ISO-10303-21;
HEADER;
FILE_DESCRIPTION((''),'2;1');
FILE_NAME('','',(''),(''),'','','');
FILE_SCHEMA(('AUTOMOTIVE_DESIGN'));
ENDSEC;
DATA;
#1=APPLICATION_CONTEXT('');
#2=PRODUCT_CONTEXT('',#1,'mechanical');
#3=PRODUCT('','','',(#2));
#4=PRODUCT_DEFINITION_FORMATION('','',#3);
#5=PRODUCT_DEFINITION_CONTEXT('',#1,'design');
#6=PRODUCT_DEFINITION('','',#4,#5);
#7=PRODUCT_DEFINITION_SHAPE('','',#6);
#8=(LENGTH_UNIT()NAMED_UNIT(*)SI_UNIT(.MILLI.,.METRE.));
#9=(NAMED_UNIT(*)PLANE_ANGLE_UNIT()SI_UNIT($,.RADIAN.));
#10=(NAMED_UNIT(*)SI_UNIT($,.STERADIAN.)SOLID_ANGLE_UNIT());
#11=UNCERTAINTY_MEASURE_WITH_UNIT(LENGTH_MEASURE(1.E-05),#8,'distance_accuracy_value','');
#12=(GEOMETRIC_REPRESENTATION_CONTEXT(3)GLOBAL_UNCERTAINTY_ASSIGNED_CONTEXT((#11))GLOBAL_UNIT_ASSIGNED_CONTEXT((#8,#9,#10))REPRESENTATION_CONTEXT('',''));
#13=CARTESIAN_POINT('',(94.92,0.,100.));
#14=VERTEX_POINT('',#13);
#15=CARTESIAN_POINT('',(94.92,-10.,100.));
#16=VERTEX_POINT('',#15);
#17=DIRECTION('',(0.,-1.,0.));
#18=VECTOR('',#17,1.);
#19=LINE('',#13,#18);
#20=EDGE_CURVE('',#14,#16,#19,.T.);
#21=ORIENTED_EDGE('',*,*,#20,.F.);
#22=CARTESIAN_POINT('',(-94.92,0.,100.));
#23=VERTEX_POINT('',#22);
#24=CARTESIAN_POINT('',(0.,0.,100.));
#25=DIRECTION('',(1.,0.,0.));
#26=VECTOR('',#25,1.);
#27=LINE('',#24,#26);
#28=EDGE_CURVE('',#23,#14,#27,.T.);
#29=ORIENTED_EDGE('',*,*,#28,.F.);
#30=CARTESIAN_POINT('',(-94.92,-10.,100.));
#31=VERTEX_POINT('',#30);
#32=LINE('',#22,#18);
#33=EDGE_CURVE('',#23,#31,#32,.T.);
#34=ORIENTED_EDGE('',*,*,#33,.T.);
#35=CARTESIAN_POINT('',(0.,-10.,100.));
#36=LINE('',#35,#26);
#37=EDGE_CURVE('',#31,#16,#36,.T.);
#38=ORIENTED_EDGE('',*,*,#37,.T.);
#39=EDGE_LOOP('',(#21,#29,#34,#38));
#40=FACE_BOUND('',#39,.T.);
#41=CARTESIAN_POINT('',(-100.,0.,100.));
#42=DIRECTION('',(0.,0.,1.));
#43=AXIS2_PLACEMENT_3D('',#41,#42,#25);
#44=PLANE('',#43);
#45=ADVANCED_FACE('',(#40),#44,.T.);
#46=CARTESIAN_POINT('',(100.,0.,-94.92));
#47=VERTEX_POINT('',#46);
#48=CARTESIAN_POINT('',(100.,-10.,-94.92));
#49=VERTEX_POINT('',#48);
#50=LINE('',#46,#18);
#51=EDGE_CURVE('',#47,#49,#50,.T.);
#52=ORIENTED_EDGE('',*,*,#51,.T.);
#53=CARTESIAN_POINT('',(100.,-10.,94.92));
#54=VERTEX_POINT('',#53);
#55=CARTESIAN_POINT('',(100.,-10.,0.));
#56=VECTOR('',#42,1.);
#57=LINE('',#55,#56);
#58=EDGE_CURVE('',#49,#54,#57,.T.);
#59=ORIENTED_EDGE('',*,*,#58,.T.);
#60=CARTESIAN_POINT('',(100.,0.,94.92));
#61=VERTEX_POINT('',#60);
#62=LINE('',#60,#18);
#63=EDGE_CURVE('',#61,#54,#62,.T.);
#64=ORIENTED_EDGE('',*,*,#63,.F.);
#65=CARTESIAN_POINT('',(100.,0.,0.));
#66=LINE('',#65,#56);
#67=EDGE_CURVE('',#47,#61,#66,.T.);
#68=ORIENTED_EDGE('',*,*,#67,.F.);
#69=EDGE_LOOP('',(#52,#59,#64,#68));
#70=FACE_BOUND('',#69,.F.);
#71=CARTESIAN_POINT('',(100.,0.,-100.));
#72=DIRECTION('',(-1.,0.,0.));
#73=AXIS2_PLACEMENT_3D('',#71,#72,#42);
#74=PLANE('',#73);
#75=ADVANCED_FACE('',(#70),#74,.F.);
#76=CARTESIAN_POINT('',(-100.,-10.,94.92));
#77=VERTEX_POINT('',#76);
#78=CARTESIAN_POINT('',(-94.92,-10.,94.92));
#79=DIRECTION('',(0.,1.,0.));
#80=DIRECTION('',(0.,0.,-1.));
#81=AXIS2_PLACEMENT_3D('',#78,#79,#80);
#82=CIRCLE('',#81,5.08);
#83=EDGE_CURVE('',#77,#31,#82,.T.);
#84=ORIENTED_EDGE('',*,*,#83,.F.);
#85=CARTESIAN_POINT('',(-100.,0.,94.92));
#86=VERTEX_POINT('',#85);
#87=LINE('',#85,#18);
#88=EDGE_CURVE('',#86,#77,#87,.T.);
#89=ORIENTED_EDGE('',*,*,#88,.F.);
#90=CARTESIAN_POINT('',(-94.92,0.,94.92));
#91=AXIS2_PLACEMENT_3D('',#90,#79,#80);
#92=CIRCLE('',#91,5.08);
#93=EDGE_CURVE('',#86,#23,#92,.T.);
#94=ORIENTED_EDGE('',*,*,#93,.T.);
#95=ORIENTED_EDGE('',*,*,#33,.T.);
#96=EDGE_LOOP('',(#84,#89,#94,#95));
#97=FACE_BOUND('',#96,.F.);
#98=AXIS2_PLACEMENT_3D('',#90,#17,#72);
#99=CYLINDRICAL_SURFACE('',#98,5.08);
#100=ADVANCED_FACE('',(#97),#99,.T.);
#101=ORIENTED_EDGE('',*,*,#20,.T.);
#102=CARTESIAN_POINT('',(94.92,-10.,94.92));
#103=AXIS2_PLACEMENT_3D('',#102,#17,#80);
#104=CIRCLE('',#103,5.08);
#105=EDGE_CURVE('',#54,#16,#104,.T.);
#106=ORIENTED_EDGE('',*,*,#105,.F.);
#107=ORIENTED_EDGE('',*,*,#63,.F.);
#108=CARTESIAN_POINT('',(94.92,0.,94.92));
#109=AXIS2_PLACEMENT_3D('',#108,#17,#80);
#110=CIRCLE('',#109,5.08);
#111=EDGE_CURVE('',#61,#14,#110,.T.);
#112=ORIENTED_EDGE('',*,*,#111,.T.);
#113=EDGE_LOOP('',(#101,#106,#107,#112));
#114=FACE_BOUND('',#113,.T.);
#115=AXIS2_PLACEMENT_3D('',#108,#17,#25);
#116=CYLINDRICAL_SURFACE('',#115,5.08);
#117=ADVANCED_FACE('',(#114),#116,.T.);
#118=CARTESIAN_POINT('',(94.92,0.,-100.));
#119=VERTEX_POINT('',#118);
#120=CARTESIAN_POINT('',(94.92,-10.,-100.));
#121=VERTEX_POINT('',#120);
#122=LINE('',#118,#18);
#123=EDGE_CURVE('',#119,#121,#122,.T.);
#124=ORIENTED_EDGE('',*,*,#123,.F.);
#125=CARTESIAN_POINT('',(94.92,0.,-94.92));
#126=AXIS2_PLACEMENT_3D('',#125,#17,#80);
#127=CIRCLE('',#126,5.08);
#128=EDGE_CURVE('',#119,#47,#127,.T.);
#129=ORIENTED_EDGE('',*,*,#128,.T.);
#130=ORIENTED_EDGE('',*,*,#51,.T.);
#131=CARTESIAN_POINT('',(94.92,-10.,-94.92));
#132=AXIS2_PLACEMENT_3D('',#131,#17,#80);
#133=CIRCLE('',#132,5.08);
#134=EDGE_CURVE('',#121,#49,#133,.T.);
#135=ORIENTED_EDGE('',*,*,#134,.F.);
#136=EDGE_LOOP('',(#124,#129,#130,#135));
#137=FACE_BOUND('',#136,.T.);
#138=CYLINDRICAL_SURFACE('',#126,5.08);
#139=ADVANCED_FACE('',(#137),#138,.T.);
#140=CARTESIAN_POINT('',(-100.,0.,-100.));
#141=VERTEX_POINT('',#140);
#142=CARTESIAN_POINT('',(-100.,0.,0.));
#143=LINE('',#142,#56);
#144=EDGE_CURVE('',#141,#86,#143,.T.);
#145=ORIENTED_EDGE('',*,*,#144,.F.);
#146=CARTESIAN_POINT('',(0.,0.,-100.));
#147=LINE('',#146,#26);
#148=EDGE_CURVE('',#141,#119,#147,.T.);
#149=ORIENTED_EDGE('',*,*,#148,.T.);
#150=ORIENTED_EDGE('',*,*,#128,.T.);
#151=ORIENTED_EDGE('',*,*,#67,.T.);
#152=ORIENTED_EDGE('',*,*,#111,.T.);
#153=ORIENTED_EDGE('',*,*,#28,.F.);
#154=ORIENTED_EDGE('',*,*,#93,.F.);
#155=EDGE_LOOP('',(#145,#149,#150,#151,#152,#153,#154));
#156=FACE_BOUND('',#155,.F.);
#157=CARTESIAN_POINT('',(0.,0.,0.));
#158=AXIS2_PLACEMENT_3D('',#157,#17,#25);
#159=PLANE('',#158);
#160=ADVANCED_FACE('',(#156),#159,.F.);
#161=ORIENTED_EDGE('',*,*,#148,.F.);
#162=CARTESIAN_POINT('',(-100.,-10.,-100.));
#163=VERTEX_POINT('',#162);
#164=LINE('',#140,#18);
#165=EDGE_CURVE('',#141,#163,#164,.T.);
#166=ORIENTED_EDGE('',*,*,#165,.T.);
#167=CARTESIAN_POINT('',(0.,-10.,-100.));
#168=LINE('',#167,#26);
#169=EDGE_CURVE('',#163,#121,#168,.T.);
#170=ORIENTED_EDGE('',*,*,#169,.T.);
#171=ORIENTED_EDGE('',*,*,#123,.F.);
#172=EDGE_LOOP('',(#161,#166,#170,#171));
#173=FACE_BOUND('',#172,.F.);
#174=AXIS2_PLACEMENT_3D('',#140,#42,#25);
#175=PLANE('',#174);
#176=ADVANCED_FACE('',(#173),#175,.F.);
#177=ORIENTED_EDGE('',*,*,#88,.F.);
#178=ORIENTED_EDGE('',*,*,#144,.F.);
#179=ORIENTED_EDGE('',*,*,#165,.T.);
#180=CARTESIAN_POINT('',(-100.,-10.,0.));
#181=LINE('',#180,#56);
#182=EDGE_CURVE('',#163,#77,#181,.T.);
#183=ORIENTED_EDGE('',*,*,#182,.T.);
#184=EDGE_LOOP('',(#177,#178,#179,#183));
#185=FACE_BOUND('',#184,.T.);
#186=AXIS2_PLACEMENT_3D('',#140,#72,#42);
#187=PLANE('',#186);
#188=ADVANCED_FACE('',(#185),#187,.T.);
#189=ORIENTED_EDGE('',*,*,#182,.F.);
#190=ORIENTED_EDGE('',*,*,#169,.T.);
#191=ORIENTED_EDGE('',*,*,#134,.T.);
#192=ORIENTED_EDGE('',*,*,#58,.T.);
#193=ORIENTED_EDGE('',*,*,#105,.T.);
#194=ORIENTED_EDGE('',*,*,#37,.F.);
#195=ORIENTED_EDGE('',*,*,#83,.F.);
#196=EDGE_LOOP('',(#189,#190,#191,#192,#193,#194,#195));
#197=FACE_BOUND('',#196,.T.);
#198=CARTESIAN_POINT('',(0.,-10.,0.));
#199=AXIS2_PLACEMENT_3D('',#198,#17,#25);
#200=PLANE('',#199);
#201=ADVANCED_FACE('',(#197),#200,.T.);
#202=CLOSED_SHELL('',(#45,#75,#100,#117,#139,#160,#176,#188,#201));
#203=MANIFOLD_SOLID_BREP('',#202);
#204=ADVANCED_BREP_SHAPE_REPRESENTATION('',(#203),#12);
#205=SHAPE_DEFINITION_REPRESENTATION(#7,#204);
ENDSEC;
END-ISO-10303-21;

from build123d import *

# Parameters (mm, degrees)
F0_W     = 200
F0_H     = 200
F1_DEPTH = 10
F4_R     = 5.08


# Not quite as in the source:
# - the program builds the solid bodies; features that only make, move or delete a surface that nothing else refers to are left out


with BuildPart() as f1:
    # F0 (on Front) → F1 (new body)
    with BuildSketch(Plane.XZ):
        Rectangle(F0_W, F0_H)
    extrude(amount=F1_DEPTH)

    # F4
    f4_edges = [f1.edges().sort_by_distance(p)[0] for p in [
        (-100, -5, 100),
        (100, -5, -100),
        (100, -5, 100),
    ]]
    fillet(f4_edges, radius=F4_R)


solid = f1.part
